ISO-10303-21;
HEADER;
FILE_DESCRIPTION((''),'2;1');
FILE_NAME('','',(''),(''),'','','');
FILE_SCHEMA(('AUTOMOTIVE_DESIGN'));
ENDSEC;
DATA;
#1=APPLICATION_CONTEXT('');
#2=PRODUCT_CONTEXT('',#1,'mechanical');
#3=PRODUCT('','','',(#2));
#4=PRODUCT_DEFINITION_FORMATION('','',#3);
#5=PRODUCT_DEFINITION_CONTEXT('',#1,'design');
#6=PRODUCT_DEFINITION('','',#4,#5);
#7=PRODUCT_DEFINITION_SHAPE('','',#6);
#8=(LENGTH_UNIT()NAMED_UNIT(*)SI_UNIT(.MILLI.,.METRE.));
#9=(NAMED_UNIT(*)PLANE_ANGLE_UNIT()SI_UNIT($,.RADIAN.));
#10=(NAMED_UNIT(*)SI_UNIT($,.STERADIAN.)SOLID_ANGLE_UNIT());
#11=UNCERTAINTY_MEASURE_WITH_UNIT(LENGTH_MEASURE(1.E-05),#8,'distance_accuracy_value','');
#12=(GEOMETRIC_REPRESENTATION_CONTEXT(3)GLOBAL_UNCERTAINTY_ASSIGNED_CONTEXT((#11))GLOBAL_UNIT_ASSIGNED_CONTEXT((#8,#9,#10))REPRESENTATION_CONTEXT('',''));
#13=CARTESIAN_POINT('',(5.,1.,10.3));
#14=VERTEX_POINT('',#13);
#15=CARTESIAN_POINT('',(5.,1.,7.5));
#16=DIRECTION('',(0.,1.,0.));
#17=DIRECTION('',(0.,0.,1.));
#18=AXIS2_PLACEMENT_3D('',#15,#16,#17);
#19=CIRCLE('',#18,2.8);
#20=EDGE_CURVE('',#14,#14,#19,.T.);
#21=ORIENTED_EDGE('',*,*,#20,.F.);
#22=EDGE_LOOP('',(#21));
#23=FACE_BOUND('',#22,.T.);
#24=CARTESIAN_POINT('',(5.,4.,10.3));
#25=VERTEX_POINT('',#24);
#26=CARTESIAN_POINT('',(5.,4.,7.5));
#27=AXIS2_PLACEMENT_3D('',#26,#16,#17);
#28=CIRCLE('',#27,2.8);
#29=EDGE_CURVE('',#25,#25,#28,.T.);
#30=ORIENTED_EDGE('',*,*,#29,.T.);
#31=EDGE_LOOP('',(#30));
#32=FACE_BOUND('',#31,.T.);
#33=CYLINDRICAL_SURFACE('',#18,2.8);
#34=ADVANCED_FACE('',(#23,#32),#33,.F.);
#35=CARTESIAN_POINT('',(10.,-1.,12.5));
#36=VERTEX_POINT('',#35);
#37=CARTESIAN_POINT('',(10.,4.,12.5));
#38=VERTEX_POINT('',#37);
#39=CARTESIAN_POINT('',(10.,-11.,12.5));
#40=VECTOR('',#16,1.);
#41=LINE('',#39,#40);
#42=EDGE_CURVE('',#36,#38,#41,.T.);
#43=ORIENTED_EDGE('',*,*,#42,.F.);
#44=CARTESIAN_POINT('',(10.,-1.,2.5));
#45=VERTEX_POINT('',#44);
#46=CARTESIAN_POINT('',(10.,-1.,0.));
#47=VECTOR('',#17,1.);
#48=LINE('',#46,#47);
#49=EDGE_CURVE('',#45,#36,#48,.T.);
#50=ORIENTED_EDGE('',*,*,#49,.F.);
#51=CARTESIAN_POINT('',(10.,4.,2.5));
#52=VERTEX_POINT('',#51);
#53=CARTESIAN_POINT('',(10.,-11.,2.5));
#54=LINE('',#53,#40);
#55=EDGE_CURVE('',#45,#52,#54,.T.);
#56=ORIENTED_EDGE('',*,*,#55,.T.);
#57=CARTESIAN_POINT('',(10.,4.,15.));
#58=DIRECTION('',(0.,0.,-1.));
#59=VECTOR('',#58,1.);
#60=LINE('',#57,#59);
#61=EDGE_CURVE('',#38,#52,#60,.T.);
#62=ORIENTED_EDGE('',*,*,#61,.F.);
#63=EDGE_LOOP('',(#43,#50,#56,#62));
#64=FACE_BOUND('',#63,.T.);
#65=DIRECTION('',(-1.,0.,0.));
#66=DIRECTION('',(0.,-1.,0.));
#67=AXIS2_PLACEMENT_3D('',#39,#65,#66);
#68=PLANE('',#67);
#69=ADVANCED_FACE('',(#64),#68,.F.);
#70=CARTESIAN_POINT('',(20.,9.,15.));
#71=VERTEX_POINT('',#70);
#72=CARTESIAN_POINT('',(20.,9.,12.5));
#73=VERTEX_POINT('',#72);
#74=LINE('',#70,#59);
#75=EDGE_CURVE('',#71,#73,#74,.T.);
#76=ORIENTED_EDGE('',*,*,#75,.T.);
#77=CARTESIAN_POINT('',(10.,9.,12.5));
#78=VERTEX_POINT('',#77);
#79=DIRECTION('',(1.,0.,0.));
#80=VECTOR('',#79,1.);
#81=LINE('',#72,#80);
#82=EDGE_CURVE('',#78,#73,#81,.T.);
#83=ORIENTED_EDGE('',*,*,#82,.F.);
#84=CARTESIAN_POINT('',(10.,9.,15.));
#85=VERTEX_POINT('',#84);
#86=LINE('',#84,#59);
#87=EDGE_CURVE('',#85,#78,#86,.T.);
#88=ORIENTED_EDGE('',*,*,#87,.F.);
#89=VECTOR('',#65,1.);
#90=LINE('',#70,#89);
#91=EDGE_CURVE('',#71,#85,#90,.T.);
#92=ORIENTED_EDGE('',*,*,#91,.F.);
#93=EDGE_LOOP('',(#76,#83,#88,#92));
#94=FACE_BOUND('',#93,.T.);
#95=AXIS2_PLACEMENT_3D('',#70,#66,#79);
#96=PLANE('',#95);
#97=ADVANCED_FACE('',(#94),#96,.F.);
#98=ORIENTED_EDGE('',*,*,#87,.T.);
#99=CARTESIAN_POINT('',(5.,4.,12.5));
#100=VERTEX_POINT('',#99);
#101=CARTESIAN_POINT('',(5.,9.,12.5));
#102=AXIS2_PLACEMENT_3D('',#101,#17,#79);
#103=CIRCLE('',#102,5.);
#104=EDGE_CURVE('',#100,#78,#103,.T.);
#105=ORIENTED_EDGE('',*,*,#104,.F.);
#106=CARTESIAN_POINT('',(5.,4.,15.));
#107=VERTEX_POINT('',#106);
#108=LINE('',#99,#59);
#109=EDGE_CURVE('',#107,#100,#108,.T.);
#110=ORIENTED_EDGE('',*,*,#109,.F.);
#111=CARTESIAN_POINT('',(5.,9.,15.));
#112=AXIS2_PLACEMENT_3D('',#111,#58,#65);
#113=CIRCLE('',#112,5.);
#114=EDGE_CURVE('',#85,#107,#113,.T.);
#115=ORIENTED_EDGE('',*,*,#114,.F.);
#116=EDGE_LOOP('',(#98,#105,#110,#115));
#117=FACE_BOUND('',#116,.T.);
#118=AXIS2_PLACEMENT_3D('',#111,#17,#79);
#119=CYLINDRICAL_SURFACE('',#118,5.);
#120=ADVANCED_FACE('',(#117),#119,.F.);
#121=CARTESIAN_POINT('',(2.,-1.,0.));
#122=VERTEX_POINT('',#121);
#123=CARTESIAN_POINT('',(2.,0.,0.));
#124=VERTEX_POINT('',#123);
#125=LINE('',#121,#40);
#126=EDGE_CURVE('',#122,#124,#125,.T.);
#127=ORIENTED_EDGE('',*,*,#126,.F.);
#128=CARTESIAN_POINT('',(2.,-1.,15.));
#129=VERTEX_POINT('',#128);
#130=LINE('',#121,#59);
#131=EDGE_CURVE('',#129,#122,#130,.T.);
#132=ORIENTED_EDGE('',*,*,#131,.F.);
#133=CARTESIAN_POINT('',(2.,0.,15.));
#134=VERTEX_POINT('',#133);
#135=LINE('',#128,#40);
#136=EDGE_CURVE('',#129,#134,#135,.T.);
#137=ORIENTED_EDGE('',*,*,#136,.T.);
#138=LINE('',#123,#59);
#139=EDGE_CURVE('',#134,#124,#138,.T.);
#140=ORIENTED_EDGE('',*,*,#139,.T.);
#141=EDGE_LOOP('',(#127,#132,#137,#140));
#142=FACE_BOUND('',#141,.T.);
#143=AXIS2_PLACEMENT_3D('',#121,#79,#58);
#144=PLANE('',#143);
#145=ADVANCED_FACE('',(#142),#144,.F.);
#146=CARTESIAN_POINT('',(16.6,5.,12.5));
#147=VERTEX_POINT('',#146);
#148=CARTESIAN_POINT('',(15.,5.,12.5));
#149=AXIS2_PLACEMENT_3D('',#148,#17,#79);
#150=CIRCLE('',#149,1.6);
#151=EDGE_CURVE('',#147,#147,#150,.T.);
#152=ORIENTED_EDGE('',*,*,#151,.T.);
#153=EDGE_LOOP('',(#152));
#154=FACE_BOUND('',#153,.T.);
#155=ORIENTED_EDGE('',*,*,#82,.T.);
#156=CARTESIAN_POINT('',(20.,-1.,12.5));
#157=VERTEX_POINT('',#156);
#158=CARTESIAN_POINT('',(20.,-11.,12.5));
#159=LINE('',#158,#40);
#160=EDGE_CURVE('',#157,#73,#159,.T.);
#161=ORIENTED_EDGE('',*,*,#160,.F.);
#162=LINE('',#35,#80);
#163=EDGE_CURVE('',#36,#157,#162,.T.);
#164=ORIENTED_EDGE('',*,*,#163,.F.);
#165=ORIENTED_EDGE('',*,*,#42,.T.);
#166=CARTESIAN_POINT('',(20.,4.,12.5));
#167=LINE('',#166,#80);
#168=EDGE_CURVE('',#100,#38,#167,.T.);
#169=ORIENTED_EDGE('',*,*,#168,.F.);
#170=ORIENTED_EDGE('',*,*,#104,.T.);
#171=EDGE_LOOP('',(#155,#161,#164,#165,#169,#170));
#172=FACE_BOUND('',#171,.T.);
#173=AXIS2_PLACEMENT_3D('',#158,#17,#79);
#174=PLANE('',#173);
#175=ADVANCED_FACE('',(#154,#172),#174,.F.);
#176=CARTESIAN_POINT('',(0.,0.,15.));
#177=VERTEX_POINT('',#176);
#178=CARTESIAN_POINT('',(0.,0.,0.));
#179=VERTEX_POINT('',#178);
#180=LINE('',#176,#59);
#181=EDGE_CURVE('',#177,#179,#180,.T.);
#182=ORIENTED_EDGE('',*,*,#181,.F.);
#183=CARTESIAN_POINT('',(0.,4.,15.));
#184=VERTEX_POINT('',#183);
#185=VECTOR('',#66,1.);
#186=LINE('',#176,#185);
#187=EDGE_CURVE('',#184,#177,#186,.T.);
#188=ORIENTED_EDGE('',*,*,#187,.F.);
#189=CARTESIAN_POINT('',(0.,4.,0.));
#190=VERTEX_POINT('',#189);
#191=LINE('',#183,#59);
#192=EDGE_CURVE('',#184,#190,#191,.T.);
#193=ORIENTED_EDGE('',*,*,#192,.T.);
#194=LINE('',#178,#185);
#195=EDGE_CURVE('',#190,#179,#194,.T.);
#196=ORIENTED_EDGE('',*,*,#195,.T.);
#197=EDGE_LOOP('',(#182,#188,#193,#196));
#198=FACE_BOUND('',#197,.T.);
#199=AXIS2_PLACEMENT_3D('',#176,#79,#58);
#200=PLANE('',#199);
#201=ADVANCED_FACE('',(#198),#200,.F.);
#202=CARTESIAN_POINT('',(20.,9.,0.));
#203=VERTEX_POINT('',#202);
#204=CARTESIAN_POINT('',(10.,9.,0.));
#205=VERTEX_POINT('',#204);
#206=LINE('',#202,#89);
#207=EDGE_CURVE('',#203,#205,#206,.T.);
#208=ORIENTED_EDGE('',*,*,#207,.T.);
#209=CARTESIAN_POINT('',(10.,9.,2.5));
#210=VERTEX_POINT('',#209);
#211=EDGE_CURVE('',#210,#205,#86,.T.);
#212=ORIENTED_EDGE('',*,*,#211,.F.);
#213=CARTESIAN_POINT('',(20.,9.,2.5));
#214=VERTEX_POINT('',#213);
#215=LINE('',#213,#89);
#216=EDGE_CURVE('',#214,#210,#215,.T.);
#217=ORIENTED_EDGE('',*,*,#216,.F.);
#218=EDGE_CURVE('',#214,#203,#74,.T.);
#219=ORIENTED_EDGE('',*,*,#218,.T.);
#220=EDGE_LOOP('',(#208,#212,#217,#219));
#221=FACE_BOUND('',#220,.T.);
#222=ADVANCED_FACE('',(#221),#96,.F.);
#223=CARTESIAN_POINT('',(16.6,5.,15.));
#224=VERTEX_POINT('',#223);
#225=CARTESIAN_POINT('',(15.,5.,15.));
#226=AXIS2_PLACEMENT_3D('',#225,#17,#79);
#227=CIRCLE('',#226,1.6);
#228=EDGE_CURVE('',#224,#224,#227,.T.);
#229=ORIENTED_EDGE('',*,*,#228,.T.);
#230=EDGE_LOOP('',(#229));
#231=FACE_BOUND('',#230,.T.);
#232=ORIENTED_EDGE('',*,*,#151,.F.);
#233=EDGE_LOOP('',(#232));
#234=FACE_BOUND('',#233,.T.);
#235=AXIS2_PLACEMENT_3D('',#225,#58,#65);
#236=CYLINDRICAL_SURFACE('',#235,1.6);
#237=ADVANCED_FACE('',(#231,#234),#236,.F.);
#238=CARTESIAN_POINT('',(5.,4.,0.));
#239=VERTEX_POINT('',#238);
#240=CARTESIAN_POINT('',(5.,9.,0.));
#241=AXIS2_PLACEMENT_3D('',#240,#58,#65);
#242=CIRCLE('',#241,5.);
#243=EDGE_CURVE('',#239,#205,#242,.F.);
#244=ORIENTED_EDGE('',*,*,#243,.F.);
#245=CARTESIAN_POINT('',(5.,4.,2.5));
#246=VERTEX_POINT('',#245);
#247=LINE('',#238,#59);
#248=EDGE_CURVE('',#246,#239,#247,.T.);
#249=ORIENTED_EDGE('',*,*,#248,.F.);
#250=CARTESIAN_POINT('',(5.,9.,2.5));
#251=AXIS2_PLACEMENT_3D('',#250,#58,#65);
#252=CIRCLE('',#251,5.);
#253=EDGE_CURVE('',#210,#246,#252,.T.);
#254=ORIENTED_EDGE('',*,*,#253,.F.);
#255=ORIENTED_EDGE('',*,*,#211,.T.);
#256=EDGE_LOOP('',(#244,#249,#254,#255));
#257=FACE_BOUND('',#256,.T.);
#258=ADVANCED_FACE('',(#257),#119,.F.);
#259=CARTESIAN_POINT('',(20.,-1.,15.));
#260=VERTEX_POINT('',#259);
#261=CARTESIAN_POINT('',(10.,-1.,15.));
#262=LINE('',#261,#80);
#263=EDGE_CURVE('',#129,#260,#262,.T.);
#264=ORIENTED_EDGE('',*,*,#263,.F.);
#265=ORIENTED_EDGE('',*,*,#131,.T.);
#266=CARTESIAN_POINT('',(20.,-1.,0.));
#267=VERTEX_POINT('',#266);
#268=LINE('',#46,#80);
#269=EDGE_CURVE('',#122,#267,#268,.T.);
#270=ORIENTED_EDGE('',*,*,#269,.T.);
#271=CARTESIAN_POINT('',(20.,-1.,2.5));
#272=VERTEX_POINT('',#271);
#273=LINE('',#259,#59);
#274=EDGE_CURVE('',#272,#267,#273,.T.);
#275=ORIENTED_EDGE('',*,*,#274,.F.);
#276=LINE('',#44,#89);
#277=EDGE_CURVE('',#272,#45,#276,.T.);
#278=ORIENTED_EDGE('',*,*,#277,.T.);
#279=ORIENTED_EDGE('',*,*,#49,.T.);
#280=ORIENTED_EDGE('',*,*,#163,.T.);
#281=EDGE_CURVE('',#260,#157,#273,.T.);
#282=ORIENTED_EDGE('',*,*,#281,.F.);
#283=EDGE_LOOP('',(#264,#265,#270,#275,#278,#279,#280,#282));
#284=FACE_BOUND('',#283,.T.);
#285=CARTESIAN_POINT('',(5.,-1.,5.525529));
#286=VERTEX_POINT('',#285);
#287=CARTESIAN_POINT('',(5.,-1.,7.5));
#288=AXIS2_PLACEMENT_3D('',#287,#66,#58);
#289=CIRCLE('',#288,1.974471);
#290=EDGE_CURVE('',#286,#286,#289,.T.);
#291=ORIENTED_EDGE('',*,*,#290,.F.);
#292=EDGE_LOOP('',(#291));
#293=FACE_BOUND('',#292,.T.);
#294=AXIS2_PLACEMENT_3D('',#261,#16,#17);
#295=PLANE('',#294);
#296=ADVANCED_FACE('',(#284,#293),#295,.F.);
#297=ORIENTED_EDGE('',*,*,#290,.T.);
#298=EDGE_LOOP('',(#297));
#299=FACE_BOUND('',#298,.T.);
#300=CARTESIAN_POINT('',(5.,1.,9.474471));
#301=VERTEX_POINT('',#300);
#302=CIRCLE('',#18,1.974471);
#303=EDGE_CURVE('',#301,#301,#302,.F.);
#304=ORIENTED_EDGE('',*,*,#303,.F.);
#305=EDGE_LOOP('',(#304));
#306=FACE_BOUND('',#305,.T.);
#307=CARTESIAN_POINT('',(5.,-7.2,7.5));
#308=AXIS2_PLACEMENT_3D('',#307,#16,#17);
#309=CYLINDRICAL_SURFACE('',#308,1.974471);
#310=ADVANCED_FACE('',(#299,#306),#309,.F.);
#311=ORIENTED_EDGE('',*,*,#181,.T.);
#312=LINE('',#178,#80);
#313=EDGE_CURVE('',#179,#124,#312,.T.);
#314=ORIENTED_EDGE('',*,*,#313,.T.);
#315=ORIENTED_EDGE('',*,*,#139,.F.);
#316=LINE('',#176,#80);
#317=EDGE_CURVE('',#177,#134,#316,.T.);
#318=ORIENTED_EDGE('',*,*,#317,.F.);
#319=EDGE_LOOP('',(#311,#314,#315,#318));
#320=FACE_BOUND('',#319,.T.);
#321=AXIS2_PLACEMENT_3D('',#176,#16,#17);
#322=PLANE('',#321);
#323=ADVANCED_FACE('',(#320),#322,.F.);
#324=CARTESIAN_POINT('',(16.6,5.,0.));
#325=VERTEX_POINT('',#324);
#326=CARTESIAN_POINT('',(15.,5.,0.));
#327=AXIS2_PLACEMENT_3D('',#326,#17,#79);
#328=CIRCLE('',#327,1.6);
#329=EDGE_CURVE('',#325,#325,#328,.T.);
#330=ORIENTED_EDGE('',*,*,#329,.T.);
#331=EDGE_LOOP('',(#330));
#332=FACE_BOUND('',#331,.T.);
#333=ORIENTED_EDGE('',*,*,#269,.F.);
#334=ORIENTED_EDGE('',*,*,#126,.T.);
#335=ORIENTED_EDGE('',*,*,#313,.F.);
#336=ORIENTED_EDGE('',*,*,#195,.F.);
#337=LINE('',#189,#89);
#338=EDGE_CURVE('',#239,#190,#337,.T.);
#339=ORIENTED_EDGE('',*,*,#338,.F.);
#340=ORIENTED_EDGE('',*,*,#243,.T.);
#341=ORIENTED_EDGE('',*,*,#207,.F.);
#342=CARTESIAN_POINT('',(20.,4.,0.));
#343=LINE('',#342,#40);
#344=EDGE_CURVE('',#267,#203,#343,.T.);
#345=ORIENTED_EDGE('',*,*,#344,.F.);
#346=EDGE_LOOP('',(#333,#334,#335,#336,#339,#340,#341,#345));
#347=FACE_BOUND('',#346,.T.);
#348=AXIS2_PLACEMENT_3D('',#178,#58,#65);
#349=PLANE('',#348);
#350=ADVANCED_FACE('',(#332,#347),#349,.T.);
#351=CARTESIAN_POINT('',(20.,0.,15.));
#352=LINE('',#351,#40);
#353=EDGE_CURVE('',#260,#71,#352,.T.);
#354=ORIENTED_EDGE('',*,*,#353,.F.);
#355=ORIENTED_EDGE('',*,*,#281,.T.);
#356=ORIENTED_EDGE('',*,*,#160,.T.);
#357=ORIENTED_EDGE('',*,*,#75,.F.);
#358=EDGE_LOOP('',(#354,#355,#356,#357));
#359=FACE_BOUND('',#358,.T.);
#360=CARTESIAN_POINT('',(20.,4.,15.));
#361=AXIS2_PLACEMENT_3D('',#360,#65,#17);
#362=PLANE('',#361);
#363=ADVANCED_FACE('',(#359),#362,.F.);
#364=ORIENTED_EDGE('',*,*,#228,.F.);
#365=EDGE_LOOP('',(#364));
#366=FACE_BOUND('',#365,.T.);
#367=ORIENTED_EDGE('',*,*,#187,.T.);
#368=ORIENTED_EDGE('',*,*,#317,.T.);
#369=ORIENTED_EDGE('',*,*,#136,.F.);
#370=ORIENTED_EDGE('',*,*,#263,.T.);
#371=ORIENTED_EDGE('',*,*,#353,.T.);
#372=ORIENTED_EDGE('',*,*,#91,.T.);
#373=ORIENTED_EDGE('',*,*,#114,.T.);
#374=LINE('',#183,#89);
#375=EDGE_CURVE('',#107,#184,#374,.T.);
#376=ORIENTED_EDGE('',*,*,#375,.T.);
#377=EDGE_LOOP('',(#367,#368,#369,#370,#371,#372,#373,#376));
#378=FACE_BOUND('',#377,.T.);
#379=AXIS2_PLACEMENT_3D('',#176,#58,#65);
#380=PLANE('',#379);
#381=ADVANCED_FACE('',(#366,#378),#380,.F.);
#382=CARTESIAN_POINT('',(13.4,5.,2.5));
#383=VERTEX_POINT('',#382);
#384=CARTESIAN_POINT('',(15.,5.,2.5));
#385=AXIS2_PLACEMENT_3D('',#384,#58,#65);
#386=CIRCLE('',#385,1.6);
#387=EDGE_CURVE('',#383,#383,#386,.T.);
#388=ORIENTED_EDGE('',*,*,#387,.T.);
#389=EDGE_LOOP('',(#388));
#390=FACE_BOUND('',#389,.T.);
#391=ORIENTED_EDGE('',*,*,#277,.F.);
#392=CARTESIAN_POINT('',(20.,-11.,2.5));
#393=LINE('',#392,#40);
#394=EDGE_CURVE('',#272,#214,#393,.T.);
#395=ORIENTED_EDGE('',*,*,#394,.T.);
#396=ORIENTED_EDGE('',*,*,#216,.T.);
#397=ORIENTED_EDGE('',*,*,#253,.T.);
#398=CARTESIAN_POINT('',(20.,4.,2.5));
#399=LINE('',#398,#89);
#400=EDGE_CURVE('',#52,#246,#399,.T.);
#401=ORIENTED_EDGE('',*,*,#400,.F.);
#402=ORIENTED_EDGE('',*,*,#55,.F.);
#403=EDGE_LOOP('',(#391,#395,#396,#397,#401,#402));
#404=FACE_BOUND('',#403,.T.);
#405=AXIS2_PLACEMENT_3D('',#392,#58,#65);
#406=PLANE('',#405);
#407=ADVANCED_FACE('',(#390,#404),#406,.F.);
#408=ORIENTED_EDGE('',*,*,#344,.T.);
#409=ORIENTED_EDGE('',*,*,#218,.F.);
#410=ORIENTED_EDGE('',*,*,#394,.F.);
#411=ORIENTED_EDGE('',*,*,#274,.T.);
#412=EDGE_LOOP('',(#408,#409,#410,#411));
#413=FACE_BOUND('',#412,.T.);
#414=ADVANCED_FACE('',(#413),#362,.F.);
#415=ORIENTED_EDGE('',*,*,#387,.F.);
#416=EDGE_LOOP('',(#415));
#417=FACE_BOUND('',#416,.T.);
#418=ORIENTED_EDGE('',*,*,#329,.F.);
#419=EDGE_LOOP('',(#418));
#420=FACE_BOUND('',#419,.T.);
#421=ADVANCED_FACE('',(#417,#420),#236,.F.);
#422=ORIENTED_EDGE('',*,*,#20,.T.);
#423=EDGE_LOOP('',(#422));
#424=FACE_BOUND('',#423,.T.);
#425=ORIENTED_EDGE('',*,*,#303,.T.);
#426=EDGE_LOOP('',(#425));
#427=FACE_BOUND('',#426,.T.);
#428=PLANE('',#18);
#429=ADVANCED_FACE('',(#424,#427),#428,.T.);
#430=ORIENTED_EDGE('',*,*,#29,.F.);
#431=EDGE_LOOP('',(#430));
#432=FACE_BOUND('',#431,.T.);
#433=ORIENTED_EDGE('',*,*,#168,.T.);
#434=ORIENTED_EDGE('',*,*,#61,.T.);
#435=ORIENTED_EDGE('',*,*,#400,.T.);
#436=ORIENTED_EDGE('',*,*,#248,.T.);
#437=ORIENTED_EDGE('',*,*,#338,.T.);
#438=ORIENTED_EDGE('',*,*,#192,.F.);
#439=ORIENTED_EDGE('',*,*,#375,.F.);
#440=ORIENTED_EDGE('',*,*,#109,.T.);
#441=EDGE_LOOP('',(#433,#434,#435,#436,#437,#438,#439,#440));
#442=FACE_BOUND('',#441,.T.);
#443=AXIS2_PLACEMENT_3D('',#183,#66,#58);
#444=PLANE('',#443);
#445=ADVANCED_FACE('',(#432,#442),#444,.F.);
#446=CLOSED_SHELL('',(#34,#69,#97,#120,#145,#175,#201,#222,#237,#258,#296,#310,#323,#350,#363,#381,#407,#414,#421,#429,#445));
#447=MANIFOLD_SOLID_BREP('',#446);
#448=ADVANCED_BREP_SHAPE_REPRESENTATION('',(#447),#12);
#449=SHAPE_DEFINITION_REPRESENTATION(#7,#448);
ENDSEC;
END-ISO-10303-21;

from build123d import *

# Parameters (mm, degrees)
CROQUIS1_R              = 1.6
SALIENTE_EXTRUIR1_DEPTH = 15
CROQUIS2_W              = 10
CROQUIS2_H              = 10
CORTAR_EXTRUIR1_DEPTH   = 20
REDONDEO1_R             = 5
CROQUIS3_R              = 1.974471168
CORTAR_EXTRUIR2_DEPTH   = 11.2
CROQUIS4_R              = 2.8
CORTAR_EXTRUIR3_DEPTH   = 3
CROQUIS6_W              = 8
CROQUIS6_H              = 15
CROQUIS6_R              = 1.974471168
SALIENTE_EXTRUIR2_DEPTH = 1


with BuildPart() as part:
    # Croquis1 → Saliente-Extruir1 (new body)
    with BuildSketch(Plane.XY):
        Polygon((0, 0), (10, 0), (10, -1), (20, -1), (20, 0), (20, 4), (20, 9), (10, 9), (10, 4), (0, 4), align=None)
        with Locations((15, 5)):
            Circle(CROQUIS1_R, mode=Mode.SUBTRACT)
    extrude(amount=SALIENTE_EXTRUIR1_DEPTH)

    # Croquis2 → Cortar-Extruir1 (cut)
    with BuildSketch(Plane(origin=(0, 9, 0), x_dir=(1, 0, 0), z_dir=(0, 1, 0))):
        with Locations((15, -7.5)):
            Rectangle(CROQUIS2_W, CROQUIS2_H)
    extrude(amount=-CORTAR_EXTRUIR1_DEPTH, mode=Mode.SUBTRACT)

    # Redondeo1
    redondeo1_edges = [part.edges().sort_by_distance(p)[0] for p in [
        (10, 4, 1.25),
        (10, 4, 13.75),
    ]]
    fillet(redondeo1_edges, radius=REDONDEO1_R - 0.0001)  # a hair under: the kernel refuses the full size

    # Croquis3 → Cortar-Extruir2 (cut)
    with BuildSketch(Plane(origin=(0, 4, 0), x_dir=(1, 0, 0), z_dir=(0, 1, 0))):
        with Locations(Location((5, -7.5, 0), (0, 0, 270))):
            Circle(CROQUIS3_R)
    extrude(amount=-CORTAR_EXTRUIR2_DEPTH, mode=Mode.SUBTRACT)

    # Croquis4 → Cortar-Extruir3 (cut)
    with BuildSketch(Plane(origin=(0, 4, 0), x_dir=(1, 0, 0), z_dir=(0, 1, 0))):
        with Locations(Location((5, -7.5, 0), (0, 0, 270))):
            Circle(CROQUIS4_R)
    extrude(amount=-CORTAR_EXTRUIR3_DEPTH, mode=Mode.SUBTRACT)

    # Croquis6 → Saliente-Extruir2 (add)
    with BuildSketch(Plane.XZ):
        with Locations((6, 7.5)):
            Rectangle(CROQUIS6_W, CROQUIS6_H)
        with Locations(Location((5, 7.5, 0), (0, 0, 90))):
            Circle(CROQUIS6_R, mode=Mode.SUBTRACT)
    extrude(amount=SALIENTE_EXTRUIR2_DEPTH)


solid = part.part
